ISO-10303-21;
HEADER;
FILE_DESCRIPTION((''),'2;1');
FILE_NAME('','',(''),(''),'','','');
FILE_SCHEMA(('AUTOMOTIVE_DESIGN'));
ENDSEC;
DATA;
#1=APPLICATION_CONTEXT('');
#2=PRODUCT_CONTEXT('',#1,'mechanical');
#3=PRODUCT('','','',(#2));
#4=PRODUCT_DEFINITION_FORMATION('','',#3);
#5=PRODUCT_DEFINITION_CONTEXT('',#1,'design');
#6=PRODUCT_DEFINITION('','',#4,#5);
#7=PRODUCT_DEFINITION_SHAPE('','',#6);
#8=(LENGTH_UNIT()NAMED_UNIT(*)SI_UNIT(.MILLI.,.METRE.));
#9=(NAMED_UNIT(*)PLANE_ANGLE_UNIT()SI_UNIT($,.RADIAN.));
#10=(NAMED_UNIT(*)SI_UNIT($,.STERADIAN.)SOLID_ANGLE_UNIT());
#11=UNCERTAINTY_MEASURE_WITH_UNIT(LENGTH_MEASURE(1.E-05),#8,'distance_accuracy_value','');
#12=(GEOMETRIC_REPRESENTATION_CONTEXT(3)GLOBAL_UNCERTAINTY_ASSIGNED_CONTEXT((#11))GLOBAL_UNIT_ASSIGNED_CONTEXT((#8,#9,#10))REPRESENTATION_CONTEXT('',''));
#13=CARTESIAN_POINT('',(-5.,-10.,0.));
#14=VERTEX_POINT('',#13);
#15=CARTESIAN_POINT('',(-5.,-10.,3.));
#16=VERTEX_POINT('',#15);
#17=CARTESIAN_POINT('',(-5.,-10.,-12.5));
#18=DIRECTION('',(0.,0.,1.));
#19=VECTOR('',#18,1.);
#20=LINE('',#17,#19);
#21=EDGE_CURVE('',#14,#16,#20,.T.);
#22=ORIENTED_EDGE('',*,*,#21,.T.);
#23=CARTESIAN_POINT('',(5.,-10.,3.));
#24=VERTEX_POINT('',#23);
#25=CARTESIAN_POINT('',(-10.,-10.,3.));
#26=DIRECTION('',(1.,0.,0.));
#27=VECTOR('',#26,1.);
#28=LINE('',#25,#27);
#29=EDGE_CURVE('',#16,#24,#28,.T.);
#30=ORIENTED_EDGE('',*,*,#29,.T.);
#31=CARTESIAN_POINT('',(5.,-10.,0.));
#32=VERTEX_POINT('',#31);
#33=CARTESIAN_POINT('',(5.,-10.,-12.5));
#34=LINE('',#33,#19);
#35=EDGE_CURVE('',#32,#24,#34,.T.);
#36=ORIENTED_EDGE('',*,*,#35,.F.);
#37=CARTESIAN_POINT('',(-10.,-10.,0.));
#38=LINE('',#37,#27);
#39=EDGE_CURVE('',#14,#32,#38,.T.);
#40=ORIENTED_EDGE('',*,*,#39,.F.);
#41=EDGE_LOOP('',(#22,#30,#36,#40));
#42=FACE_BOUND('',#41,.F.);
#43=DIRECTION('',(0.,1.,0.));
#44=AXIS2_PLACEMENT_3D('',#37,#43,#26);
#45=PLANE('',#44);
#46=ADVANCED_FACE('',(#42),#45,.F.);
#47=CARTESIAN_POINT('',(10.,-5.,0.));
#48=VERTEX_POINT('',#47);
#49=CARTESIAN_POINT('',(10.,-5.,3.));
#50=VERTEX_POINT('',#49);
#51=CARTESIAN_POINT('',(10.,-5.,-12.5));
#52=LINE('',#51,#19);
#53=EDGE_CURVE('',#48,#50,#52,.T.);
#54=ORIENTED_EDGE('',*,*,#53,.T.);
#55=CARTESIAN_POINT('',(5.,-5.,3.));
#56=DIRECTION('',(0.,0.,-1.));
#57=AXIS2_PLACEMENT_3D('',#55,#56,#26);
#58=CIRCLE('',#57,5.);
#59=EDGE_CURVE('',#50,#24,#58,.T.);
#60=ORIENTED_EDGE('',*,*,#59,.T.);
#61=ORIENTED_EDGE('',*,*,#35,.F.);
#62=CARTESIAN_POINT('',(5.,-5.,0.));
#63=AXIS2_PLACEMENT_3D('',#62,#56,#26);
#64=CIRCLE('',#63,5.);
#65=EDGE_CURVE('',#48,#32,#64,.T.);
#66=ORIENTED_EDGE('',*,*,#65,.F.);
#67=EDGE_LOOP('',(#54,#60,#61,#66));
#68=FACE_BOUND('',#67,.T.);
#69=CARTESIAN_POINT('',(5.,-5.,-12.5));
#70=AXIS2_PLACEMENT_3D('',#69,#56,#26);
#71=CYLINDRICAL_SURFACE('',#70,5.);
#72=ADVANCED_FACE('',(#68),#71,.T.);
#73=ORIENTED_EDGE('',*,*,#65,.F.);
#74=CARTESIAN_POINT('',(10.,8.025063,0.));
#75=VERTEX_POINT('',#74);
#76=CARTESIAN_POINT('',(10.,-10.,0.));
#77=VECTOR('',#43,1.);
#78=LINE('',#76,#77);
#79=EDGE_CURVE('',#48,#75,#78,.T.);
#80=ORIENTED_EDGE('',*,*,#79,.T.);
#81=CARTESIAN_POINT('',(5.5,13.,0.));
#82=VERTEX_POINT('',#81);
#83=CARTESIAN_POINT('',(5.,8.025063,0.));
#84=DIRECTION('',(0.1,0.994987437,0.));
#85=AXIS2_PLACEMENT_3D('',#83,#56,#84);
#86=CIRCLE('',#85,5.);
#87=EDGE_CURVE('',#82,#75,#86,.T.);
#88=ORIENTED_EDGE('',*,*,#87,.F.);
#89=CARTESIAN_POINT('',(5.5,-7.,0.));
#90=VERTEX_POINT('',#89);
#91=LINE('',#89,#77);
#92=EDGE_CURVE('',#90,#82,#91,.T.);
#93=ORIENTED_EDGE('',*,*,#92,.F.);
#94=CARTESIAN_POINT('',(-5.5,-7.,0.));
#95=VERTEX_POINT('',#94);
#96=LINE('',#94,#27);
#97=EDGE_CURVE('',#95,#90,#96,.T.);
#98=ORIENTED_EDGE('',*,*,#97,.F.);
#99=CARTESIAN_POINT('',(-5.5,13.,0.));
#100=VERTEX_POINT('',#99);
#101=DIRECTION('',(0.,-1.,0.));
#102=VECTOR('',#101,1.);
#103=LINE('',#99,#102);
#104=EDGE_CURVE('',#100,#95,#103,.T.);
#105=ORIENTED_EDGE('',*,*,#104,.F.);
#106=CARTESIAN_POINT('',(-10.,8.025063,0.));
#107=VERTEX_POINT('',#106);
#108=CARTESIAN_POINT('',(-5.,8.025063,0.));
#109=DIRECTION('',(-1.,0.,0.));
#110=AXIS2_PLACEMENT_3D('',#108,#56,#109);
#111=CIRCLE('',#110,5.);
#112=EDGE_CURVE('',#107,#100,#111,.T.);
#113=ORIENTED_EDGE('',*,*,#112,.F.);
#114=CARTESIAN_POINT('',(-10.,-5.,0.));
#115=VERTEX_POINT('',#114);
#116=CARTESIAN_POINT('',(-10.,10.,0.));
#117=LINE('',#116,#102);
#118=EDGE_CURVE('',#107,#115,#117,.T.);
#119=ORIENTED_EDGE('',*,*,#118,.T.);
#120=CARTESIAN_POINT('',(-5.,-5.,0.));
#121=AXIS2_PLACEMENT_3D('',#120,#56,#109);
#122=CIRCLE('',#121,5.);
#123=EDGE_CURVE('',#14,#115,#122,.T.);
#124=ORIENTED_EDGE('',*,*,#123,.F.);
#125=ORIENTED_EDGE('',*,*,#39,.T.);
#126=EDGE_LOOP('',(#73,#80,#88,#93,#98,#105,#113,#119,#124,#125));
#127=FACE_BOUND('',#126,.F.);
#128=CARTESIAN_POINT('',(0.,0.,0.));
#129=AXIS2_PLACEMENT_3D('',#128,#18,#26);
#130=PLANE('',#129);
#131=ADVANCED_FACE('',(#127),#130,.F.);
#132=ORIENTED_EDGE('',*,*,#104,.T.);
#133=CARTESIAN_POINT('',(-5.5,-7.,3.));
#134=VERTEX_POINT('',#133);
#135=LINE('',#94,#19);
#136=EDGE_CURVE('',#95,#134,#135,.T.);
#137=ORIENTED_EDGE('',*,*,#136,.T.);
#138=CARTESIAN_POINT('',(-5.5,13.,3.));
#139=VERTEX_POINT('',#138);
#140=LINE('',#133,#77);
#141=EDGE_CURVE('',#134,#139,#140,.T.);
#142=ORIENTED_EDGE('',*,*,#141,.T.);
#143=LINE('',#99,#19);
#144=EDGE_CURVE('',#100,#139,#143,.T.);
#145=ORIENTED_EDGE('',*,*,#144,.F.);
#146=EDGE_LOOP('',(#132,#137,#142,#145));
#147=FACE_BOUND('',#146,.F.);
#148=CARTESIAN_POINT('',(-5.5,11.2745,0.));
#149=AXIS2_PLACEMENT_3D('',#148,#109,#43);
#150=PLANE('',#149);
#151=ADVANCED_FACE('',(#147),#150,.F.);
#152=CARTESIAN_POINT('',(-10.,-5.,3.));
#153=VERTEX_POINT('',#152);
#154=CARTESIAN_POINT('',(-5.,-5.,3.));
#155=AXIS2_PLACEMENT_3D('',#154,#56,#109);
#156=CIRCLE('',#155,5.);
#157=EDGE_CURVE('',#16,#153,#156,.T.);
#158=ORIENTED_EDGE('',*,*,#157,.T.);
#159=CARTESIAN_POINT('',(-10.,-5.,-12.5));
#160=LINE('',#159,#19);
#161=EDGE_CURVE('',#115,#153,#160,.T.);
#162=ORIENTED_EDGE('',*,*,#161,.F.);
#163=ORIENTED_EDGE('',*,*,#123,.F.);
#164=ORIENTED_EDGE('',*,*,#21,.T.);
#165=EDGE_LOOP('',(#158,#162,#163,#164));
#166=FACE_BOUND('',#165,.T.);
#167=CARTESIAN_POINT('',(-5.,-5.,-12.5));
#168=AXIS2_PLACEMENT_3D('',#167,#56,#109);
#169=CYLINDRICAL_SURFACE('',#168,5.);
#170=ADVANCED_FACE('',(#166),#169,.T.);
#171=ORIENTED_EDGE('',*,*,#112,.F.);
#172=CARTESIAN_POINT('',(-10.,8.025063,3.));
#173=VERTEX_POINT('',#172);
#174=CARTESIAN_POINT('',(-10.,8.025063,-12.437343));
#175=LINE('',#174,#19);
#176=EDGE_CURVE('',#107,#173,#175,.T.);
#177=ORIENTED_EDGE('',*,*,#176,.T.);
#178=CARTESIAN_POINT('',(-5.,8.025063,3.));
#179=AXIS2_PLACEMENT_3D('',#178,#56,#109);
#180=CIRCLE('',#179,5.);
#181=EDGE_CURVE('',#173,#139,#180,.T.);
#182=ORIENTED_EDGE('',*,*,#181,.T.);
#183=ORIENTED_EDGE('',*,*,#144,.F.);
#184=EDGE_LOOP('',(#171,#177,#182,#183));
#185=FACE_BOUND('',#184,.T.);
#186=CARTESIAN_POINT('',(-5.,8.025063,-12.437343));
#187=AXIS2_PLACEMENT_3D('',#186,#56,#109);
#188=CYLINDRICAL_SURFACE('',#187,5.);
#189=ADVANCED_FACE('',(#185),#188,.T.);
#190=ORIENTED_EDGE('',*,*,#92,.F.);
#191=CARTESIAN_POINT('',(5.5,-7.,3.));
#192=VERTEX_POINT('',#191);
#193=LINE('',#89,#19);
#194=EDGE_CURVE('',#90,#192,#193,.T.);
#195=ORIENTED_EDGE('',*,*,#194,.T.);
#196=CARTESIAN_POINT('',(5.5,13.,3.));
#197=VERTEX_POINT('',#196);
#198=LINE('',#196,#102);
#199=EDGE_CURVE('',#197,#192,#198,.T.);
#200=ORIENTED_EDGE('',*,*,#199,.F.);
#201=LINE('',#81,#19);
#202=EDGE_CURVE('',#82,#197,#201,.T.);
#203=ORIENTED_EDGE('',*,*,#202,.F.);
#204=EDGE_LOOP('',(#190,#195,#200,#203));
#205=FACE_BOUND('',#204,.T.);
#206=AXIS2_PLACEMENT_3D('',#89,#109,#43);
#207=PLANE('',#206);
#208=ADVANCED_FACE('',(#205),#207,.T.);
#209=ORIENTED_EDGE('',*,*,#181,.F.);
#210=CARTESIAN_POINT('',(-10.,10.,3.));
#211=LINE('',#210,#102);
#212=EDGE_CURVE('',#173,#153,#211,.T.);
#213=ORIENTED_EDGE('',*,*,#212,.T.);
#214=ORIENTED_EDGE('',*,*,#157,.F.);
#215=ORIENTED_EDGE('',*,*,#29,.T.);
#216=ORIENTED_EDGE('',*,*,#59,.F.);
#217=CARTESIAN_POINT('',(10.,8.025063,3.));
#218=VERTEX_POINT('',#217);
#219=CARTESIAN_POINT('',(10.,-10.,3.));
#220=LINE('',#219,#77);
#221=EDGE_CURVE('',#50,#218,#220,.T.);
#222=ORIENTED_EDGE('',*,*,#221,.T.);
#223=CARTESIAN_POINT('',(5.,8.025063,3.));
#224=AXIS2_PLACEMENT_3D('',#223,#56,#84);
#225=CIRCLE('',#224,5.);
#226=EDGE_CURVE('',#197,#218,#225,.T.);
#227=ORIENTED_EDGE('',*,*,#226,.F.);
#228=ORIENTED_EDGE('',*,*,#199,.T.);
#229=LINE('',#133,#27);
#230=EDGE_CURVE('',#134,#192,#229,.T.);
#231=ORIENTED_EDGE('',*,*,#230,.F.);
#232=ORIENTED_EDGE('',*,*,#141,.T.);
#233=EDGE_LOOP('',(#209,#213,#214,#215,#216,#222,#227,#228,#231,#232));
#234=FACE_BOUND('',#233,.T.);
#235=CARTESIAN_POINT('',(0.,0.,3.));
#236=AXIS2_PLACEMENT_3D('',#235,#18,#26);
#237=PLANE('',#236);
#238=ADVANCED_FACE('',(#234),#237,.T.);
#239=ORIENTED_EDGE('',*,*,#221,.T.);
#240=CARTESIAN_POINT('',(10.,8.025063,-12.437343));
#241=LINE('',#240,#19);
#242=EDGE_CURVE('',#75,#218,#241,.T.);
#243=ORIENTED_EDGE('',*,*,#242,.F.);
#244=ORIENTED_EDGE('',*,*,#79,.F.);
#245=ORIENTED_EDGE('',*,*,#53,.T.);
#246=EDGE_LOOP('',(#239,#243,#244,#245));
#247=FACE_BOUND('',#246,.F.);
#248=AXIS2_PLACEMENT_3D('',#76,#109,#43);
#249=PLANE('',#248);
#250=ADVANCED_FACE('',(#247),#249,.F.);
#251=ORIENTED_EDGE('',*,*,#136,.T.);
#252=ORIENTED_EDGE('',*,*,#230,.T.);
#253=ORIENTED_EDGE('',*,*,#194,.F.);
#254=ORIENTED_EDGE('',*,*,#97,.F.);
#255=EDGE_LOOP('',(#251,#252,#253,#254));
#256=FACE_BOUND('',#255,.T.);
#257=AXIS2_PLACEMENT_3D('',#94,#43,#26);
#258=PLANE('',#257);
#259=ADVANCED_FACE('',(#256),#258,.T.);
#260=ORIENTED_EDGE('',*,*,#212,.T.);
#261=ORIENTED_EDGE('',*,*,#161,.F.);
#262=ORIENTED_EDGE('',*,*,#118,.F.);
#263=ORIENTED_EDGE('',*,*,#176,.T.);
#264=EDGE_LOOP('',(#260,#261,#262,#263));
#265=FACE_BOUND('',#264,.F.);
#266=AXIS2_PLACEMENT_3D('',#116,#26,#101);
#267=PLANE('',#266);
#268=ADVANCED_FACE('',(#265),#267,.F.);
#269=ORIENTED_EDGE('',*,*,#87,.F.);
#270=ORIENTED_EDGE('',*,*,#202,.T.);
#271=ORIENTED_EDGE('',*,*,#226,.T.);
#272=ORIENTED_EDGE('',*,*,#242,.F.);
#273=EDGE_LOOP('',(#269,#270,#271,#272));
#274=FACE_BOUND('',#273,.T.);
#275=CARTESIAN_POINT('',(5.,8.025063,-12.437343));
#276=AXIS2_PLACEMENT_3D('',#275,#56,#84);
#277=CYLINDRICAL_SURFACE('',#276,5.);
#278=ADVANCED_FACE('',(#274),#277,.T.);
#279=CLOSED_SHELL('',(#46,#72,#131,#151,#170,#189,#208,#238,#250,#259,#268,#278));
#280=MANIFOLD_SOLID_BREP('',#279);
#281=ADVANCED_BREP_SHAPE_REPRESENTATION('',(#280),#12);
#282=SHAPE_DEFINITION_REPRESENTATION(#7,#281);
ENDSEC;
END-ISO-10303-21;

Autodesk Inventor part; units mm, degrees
ref_plane "YZ Plane" through (0, 0, 0) normal (1, 0, 0) x (0, 1, 0)
ref_plane "XZ Plane" through (0, 0, 0) normal (0, 1, 0) x (-1, 0, 0)
ref_plane "XY Plane" through (0, 0, 0) normal (0, 0, 1) x (1, 0, 0)
sketch "Boceto1" plane through (0, 0, 0) normal (0, 0, 1) x (1, 0, 0)
  line L0 (-10, -10) -> (10, -10)
  line L1 (10, -10) -> (10, 10)
  line L2 (-10, 10) -> (-10, -10)
  line L3 (-10, -10) -> (10, 10) construction
  line L4 (10, -10) -> (-10, 10) construction
  circle A0 centre (0, 0) radius 5.5
  line L5 (-5.5, 0) -> (-5.5, 11.2745)
  line L6 (-5.5, 11.2745) -> (-5.5, 10)
  line L7 (5.5, 0) -> (5.5, 6.4261)
  line L8 (5.5, 6.4261) -> (5.5, 10.6373)
  line L9 (-5.5, 0) -> (-5.5, -7)
  line L10 (-5.5, -7) -> (5.5, -7)
  line L11 (5.5, -7) -> (5.5, 0)
  line L12 (-5.5, 10) -> (-5.5, 13)
  line L13 (-5.5, 13) -> (-10, 13)
  line L14 (-10, 13) -> (-10, 10)
  line L15 (5.5, 10) -> (5.5, 13)
  line L16 (10, 13) -> (10, 10)
  line L17 (5.5, 13) -> (10, 13)
  dimension "d0" = 20
  dimension "d1" = 20
  dimension "d2" = 11
  dimension "d4" = 7
  dimension "d5" = 3
  dimension "d6" = 23
extrude "Extrusión1" add sketch "Boceto1" along normal blind 3 contours L2 L14 L13 L12 L5 L9 L10 L11 L7 L8 L15 L17 L16 L1 L0
fillet "Empalme1" radius 5 4 edges at (10, -10, 1.5) (-10, -10, 1.5) (-10, 13, 1.5) (10, 13, 1.5)
properties part number "seguro2"
